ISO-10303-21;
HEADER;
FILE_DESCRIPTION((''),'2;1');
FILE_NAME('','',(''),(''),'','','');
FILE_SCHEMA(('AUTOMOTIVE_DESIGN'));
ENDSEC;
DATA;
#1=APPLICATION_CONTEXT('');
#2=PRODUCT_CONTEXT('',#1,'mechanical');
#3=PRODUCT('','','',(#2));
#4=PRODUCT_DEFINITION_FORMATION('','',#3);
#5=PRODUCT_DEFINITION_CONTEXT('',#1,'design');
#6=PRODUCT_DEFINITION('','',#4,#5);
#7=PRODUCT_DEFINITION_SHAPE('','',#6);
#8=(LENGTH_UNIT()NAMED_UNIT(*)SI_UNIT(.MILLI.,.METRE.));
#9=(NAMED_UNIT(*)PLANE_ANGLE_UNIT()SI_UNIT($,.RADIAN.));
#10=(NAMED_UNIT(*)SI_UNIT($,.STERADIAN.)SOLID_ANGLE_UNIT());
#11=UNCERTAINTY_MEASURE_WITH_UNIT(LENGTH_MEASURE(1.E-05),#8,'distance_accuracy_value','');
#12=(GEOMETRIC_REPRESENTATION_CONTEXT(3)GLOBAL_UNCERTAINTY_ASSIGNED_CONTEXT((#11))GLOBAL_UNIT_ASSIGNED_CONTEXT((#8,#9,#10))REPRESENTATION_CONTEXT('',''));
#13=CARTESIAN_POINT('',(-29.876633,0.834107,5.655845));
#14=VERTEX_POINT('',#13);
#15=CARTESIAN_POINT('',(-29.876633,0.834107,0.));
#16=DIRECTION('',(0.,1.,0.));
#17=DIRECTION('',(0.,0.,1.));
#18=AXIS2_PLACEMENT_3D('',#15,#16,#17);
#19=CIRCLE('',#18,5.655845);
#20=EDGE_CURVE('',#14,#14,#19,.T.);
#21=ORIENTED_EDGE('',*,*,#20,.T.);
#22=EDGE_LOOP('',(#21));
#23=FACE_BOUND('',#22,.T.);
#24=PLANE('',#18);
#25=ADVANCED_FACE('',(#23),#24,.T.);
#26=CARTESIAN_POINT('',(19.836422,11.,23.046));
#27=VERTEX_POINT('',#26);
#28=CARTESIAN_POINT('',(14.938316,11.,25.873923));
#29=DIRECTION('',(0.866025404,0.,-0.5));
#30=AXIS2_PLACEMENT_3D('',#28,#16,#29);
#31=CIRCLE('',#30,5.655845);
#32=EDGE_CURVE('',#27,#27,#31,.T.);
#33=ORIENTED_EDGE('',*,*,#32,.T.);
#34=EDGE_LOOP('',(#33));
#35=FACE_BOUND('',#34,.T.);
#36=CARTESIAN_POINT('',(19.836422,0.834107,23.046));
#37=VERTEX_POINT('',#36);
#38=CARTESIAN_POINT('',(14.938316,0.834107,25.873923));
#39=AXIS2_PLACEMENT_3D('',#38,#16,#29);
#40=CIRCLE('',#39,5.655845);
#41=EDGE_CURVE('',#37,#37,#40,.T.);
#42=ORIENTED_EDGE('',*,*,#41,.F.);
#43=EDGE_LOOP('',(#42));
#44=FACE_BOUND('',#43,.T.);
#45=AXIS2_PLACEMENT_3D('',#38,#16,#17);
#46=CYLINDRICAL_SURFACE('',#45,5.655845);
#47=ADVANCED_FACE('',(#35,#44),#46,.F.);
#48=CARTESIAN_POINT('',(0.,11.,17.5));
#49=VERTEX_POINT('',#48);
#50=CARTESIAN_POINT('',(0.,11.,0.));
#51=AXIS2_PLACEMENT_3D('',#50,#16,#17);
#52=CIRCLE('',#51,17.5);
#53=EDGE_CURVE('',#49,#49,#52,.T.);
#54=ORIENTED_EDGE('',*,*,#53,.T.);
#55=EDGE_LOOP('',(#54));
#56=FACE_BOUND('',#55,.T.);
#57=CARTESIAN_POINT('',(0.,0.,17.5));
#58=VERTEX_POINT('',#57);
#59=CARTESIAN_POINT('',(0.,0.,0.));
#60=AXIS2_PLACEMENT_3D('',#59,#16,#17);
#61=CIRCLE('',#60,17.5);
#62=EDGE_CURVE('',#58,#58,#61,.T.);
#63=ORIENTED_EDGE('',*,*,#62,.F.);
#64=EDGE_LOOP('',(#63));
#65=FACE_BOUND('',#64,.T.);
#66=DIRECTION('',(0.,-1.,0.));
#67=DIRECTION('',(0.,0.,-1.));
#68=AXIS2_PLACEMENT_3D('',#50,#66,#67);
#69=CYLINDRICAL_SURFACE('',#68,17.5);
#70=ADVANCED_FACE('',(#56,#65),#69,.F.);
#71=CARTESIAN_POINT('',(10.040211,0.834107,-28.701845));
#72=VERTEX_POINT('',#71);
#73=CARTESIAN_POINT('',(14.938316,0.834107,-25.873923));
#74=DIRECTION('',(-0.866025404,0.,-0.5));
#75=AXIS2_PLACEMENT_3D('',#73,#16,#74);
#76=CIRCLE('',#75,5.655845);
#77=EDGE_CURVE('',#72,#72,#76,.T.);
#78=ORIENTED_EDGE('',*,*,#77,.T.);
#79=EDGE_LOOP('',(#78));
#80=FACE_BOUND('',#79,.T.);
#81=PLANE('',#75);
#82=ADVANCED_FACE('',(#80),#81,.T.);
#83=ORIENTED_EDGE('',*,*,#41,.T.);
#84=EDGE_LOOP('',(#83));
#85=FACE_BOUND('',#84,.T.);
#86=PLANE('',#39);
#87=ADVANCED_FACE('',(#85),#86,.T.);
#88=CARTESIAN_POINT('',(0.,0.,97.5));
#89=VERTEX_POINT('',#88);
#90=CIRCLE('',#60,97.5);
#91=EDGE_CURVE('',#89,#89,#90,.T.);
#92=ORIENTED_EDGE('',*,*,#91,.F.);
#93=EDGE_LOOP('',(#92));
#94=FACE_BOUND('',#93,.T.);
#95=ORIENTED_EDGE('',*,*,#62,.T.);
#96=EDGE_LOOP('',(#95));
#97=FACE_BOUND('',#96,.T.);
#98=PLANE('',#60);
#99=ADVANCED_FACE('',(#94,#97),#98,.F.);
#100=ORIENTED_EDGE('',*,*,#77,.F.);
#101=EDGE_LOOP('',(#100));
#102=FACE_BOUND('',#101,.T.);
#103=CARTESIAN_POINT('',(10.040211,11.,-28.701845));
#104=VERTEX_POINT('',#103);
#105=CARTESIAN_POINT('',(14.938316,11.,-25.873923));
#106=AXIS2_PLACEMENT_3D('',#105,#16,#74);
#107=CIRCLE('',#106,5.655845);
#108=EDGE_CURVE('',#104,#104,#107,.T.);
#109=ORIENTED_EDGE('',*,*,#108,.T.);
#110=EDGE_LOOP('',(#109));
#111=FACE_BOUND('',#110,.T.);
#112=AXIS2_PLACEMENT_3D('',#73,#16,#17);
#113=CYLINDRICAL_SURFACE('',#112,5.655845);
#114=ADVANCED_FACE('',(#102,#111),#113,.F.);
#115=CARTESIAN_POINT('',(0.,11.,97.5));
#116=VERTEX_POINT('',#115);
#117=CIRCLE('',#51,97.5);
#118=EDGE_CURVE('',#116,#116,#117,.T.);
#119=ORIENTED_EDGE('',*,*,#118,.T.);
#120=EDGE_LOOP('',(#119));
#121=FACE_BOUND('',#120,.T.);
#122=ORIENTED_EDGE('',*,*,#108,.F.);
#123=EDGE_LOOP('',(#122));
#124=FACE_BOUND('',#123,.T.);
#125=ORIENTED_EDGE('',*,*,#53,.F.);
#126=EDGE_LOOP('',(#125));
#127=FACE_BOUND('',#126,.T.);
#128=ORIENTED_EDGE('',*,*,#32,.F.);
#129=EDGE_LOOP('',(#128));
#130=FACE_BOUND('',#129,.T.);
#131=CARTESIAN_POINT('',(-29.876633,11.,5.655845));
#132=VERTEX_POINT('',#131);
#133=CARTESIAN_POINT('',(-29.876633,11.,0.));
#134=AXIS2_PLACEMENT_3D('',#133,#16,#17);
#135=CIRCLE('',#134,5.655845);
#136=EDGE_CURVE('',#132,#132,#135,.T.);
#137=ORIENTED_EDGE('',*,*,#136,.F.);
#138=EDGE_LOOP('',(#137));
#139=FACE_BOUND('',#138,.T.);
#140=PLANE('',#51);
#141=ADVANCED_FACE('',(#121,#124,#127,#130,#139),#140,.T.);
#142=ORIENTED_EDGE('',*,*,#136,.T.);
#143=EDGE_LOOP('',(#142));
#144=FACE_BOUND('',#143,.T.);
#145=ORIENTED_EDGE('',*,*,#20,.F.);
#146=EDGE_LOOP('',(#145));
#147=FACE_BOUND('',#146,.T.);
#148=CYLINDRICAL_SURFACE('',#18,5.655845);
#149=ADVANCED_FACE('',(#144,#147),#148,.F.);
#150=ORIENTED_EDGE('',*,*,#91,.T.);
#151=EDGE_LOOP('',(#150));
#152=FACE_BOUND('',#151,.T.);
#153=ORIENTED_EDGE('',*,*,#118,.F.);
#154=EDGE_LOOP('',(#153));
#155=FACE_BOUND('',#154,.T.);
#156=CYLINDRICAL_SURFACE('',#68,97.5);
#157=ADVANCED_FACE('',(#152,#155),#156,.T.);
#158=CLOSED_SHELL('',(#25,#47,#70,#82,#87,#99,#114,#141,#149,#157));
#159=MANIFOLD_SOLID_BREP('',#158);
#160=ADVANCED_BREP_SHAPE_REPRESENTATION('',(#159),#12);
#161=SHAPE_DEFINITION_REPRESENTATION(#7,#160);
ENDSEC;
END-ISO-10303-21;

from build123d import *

# Parameters (mm, degrees)
SKETCH1_R           = 97.5
BOSS_EXTRUDE1_DEPTH = 11
SKETCH2_R           = 17.5
CUT_EXTRUDE1_DEPTH  = 139.32389526
SKETCH3_R           = 5.655844815
CUT_EXTRUDE2_DEPTH  = 10.165892716
CIRPATTERN1_COUNT   = 3


with BuildPart() as part:
    # Sketch1 → Boss-Extrude1 (new body)
    with BuildSketch(Plane(origin=(0, 0, 0), x_dir=(1, 0, 0), z_dir=(0, 1, 0))):
        Circle(SKETCH1_R)
    extrude(amount=BOSS_EXTRUDE1_DEPTH)

    # Sketch2 → Cut-Extrude1 (cut, through all)
    with BuildSketch(Plane(origin=(0, 0, 0), x_dir=(1, 0, 0), z_dir=(0, 1, 0))):
        Circle(SKETCH2_R)
    extrude(amount=CUT_EXTRUDE1_DEPTH, mode=Mode.SUBTRACT)

    # Sketch3 → Cut-Extrude2 (cut)
    with BuildSketch(Plane(origin=(0, 11, 0), x_dir=(1, 0, 0), z_dir=(0, 1, 0))):
        with Locations((-29.876632649, 0)):
            Circle(SKETCH3_R)
    cut_extrude2 = extrude(amount=-CUT_EXTRUDE2_DEPTH, mode=Mode.SUBTRACT)

    # CirPattern1: Cut-Extrude2 ×3 about axis
    cirpattern1_axis = Axis((0, 0, 0), (0, 1, 0))
    for i in range(1, CIRPATTERN1_COUNT):
        add(cut_extrude2.rotate(cirpattern1_axis, i * 360 / CIRPATTERN1_COUNT), mode=Mode.SUBTRACT)


solid = part.part
